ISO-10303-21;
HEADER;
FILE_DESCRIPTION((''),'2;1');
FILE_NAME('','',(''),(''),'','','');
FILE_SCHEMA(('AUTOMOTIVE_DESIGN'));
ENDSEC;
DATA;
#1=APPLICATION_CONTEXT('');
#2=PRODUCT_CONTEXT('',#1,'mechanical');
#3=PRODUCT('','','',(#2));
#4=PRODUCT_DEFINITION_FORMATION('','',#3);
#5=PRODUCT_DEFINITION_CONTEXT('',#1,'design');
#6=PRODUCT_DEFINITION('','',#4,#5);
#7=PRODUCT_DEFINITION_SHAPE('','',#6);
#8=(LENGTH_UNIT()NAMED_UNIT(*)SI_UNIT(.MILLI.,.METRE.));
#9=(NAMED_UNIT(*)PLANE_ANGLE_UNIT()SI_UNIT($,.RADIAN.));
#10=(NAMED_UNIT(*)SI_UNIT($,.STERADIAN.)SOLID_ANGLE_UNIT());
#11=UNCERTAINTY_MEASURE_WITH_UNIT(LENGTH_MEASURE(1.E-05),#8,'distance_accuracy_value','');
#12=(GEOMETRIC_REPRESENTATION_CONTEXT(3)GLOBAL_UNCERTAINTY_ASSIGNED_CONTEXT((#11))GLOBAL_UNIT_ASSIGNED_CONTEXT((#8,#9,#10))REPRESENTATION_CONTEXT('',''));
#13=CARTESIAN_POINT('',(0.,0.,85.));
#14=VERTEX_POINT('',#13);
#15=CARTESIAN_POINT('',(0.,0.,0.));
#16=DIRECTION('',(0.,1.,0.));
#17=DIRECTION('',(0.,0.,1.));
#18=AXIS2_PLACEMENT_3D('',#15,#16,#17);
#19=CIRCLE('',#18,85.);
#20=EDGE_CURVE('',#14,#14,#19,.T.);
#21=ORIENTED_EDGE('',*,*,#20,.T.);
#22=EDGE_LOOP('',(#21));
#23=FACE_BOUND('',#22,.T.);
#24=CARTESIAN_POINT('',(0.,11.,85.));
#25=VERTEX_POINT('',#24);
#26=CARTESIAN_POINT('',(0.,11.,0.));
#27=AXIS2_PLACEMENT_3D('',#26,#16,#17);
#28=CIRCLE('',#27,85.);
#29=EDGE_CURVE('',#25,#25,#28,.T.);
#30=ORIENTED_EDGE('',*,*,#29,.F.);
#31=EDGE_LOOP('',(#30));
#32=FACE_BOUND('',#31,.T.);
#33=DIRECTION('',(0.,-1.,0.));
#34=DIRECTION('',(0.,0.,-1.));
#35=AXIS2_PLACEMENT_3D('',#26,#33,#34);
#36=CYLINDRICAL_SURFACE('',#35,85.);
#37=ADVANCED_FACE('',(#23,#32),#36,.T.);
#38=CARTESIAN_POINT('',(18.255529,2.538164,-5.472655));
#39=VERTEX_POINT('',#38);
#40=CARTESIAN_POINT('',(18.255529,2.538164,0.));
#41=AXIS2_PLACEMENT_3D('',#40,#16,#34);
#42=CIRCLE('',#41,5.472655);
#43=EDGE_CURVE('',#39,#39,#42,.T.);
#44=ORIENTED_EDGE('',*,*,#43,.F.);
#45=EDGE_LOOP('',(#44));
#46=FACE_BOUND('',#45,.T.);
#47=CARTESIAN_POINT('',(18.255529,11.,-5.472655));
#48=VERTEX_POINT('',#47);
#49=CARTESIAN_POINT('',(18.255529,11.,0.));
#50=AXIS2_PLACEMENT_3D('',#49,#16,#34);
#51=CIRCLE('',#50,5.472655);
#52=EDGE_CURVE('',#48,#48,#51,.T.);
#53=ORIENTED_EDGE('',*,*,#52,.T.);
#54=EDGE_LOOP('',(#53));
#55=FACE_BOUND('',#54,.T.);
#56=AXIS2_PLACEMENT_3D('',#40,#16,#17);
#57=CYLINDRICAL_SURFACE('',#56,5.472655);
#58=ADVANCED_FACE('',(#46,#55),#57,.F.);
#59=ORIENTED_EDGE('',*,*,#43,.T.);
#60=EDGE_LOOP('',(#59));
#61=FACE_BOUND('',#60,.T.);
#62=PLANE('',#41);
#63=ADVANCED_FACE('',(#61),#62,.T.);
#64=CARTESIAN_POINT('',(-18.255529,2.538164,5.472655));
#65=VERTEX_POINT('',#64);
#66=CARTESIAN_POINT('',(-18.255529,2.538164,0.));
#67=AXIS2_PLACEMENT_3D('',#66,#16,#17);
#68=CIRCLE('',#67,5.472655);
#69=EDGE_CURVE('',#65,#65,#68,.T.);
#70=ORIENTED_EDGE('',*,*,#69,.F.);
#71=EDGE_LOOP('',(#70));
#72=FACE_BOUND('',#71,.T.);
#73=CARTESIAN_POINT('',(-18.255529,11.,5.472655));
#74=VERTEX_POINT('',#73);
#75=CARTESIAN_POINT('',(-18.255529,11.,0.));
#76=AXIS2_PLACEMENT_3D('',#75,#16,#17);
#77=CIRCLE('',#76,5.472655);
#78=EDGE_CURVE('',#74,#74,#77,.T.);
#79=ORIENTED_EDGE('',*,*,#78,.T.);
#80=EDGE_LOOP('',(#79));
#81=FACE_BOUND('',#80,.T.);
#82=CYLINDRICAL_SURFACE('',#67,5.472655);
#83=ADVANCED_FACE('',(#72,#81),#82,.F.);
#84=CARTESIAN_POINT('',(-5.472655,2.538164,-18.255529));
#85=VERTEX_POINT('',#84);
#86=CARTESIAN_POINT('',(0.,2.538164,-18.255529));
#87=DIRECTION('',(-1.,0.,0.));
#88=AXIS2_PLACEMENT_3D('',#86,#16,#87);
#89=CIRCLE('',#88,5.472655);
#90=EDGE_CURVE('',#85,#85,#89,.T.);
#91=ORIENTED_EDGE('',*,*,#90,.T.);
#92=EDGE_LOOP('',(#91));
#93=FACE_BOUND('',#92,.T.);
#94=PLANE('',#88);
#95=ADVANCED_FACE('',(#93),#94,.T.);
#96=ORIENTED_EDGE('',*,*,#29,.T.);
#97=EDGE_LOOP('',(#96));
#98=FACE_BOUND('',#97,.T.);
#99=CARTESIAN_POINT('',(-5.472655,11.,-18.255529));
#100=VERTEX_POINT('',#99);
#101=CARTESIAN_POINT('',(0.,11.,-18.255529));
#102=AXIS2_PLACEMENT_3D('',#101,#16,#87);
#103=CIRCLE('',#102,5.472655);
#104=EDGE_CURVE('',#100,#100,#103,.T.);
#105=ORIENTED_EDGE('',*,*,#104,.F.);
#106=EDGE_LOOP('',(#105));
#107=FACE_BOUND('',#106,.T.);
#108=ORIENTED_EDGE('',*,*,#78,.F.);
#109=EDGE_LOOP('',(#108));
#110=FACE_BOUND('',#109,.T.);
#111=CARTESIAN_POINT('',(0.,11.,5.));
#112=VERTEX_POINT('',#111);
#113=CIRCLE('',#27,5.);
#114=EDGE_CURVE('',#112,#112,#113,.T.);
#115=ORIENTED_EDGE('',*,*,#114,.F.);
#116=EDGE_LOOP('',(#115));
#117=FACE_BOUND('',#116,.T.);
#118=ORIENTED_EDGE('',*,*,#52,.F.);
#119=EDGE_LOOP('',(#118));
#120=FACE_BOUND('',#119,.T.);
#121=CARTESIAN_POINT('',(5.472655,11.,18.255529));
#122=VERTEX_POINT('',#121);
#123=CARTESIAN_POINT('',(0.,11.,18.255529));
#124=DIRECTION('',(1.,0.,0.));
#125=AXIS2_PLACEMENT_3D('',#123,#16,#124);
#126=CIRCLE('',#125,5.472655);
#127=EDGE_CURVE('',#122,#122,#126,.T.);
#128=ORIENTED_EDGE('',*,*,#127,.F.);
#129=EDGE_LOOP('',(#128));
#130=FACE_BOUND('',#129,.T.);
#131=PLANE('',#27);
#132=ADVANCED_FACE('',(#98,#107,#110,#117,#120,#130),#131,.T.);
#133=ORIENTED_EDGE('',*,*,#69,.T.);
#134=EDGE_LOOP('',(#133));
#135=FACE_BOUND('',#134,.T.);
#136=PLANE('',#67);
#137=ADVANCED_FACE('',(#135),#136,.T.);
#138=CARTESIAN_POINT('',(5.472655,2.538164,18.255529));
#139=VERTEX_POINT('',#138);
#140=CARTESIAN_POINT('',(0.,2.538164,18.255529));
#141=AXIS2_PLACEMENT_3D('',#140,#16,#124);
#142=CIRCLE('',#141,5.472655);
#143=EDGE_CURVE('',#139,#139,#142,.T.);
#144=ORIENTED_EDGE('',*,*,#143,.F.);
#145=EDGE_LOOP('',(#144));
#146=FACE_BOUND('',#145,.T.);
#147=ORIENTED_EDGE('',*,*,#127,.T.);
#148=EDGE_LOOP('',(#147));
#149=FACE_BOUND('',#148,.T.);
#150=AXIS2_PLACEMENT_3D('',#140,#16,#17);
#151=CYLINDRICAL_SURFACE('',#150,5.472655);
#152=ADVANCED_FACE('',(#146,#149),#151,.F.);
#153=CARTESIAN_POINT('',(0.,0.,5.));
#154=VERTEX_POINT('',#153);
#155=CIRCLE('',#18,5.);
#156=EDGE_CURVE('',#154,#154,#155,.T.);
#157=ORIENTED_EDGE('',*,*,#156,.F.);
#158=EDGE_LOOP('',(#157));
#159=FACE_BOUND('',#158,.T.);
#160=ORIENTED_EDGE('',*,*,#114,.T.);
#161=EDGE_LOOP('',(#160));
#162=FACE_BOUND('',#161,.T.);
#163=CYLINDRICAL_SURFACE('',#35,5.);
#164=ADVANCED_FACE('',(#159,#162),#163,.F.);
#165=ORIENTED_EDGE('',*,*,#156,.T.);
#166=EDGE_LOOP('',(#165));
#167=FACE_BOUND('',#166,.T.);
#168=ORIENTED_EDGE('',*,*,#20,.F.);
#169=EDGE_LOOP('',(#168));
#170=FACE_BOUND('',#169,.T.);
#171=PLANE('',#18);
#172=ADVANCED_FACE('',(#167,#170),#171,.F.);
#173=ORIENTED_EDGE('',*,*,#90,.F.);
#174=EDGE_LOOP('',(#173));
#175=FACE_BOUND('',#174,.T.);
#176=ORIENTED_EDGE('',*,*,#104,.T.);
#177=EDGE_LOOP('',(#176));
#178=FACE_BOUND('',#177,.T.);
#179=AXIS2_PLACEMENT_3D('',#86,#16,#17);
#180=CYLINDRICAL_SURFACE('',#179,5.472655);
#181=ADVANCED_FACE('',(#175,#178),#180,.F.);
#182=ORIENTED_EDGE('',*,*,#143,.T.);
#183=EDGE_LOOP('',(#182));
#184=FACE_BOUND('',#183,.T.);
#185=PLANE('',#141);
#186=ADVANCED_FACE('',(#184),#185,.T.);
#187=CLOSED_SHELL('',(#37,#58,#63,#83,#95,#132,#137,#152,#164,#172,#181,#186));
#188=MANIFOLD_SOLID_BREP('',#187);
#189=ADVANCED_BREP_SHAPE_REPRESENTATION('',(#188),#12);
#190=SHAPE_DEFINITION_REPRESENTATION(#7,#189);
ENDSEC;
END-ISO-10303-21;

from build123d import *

# Parameters (mm, degrees)
SKETCH1_R           = 85
BOSS_EXTRUDE1_DEPTH = 11
SKETCH2_R           = 5
CUT_EXTRUDE1_DEPTH  = 121.710397232
SKETCH3_R           = 5.472654813
CUT_EXTRUDE2_DEPTH  = 8.461836173
CIRPATTERN1_COUNT   = 4


with BuildPart() as part:
    # Sketch1 → Boss-Extrude1 (new body)
    with BuildSketch(Plane(origin=(0, 0, 0), x_dir=(1, 0, 0), z_dir=(0, 1, 0))):
        Circle(SKETCH1_R)
    extrude(amount=BOSS_EXTRUDE1_DEPTH)

    # Sketch2 → Cut-Extrude1 (cut, through all)
    with BuildSketch(Plane(origin=(0, 0, 0), x_dir=(1, 0, 0), z_dir=(0, 1, 0))):
        Circle(SKETCH2_R)
    extrude(amount=CUT_EXTRUDE1_DEPTH, mode=Mode.SUBTRACT)

    # Sketch3 → Cut-Extrude2 (cut)
    with BuildSketch(Plane(origin=(0, 11, 0), x_dir=(1, 0, 0), z_dir=(0, 1, 0))):
        with Locations((-18.255528813, 0)):
            Circle(SKETCH3_R)
    cut_extrude2 = extrude(amount=-CUT_EXTRUDE2_DEPTH, mode=Mode.SUBTRACT)

    # CirPattern1: Cut-Extrude2 ×4 about axis
    cirpattern1_axis = Axis((0, 0, 0), (0, 1, 0))
    for i in range(1, CIRPATTERN1_COUNT):
        add(cut_extrude2.rotate(cirpattern1_axis, i * 360 / CIRPATTERN1_COUNT), mode=Mode.SUBTRACT)


solid = part.part
